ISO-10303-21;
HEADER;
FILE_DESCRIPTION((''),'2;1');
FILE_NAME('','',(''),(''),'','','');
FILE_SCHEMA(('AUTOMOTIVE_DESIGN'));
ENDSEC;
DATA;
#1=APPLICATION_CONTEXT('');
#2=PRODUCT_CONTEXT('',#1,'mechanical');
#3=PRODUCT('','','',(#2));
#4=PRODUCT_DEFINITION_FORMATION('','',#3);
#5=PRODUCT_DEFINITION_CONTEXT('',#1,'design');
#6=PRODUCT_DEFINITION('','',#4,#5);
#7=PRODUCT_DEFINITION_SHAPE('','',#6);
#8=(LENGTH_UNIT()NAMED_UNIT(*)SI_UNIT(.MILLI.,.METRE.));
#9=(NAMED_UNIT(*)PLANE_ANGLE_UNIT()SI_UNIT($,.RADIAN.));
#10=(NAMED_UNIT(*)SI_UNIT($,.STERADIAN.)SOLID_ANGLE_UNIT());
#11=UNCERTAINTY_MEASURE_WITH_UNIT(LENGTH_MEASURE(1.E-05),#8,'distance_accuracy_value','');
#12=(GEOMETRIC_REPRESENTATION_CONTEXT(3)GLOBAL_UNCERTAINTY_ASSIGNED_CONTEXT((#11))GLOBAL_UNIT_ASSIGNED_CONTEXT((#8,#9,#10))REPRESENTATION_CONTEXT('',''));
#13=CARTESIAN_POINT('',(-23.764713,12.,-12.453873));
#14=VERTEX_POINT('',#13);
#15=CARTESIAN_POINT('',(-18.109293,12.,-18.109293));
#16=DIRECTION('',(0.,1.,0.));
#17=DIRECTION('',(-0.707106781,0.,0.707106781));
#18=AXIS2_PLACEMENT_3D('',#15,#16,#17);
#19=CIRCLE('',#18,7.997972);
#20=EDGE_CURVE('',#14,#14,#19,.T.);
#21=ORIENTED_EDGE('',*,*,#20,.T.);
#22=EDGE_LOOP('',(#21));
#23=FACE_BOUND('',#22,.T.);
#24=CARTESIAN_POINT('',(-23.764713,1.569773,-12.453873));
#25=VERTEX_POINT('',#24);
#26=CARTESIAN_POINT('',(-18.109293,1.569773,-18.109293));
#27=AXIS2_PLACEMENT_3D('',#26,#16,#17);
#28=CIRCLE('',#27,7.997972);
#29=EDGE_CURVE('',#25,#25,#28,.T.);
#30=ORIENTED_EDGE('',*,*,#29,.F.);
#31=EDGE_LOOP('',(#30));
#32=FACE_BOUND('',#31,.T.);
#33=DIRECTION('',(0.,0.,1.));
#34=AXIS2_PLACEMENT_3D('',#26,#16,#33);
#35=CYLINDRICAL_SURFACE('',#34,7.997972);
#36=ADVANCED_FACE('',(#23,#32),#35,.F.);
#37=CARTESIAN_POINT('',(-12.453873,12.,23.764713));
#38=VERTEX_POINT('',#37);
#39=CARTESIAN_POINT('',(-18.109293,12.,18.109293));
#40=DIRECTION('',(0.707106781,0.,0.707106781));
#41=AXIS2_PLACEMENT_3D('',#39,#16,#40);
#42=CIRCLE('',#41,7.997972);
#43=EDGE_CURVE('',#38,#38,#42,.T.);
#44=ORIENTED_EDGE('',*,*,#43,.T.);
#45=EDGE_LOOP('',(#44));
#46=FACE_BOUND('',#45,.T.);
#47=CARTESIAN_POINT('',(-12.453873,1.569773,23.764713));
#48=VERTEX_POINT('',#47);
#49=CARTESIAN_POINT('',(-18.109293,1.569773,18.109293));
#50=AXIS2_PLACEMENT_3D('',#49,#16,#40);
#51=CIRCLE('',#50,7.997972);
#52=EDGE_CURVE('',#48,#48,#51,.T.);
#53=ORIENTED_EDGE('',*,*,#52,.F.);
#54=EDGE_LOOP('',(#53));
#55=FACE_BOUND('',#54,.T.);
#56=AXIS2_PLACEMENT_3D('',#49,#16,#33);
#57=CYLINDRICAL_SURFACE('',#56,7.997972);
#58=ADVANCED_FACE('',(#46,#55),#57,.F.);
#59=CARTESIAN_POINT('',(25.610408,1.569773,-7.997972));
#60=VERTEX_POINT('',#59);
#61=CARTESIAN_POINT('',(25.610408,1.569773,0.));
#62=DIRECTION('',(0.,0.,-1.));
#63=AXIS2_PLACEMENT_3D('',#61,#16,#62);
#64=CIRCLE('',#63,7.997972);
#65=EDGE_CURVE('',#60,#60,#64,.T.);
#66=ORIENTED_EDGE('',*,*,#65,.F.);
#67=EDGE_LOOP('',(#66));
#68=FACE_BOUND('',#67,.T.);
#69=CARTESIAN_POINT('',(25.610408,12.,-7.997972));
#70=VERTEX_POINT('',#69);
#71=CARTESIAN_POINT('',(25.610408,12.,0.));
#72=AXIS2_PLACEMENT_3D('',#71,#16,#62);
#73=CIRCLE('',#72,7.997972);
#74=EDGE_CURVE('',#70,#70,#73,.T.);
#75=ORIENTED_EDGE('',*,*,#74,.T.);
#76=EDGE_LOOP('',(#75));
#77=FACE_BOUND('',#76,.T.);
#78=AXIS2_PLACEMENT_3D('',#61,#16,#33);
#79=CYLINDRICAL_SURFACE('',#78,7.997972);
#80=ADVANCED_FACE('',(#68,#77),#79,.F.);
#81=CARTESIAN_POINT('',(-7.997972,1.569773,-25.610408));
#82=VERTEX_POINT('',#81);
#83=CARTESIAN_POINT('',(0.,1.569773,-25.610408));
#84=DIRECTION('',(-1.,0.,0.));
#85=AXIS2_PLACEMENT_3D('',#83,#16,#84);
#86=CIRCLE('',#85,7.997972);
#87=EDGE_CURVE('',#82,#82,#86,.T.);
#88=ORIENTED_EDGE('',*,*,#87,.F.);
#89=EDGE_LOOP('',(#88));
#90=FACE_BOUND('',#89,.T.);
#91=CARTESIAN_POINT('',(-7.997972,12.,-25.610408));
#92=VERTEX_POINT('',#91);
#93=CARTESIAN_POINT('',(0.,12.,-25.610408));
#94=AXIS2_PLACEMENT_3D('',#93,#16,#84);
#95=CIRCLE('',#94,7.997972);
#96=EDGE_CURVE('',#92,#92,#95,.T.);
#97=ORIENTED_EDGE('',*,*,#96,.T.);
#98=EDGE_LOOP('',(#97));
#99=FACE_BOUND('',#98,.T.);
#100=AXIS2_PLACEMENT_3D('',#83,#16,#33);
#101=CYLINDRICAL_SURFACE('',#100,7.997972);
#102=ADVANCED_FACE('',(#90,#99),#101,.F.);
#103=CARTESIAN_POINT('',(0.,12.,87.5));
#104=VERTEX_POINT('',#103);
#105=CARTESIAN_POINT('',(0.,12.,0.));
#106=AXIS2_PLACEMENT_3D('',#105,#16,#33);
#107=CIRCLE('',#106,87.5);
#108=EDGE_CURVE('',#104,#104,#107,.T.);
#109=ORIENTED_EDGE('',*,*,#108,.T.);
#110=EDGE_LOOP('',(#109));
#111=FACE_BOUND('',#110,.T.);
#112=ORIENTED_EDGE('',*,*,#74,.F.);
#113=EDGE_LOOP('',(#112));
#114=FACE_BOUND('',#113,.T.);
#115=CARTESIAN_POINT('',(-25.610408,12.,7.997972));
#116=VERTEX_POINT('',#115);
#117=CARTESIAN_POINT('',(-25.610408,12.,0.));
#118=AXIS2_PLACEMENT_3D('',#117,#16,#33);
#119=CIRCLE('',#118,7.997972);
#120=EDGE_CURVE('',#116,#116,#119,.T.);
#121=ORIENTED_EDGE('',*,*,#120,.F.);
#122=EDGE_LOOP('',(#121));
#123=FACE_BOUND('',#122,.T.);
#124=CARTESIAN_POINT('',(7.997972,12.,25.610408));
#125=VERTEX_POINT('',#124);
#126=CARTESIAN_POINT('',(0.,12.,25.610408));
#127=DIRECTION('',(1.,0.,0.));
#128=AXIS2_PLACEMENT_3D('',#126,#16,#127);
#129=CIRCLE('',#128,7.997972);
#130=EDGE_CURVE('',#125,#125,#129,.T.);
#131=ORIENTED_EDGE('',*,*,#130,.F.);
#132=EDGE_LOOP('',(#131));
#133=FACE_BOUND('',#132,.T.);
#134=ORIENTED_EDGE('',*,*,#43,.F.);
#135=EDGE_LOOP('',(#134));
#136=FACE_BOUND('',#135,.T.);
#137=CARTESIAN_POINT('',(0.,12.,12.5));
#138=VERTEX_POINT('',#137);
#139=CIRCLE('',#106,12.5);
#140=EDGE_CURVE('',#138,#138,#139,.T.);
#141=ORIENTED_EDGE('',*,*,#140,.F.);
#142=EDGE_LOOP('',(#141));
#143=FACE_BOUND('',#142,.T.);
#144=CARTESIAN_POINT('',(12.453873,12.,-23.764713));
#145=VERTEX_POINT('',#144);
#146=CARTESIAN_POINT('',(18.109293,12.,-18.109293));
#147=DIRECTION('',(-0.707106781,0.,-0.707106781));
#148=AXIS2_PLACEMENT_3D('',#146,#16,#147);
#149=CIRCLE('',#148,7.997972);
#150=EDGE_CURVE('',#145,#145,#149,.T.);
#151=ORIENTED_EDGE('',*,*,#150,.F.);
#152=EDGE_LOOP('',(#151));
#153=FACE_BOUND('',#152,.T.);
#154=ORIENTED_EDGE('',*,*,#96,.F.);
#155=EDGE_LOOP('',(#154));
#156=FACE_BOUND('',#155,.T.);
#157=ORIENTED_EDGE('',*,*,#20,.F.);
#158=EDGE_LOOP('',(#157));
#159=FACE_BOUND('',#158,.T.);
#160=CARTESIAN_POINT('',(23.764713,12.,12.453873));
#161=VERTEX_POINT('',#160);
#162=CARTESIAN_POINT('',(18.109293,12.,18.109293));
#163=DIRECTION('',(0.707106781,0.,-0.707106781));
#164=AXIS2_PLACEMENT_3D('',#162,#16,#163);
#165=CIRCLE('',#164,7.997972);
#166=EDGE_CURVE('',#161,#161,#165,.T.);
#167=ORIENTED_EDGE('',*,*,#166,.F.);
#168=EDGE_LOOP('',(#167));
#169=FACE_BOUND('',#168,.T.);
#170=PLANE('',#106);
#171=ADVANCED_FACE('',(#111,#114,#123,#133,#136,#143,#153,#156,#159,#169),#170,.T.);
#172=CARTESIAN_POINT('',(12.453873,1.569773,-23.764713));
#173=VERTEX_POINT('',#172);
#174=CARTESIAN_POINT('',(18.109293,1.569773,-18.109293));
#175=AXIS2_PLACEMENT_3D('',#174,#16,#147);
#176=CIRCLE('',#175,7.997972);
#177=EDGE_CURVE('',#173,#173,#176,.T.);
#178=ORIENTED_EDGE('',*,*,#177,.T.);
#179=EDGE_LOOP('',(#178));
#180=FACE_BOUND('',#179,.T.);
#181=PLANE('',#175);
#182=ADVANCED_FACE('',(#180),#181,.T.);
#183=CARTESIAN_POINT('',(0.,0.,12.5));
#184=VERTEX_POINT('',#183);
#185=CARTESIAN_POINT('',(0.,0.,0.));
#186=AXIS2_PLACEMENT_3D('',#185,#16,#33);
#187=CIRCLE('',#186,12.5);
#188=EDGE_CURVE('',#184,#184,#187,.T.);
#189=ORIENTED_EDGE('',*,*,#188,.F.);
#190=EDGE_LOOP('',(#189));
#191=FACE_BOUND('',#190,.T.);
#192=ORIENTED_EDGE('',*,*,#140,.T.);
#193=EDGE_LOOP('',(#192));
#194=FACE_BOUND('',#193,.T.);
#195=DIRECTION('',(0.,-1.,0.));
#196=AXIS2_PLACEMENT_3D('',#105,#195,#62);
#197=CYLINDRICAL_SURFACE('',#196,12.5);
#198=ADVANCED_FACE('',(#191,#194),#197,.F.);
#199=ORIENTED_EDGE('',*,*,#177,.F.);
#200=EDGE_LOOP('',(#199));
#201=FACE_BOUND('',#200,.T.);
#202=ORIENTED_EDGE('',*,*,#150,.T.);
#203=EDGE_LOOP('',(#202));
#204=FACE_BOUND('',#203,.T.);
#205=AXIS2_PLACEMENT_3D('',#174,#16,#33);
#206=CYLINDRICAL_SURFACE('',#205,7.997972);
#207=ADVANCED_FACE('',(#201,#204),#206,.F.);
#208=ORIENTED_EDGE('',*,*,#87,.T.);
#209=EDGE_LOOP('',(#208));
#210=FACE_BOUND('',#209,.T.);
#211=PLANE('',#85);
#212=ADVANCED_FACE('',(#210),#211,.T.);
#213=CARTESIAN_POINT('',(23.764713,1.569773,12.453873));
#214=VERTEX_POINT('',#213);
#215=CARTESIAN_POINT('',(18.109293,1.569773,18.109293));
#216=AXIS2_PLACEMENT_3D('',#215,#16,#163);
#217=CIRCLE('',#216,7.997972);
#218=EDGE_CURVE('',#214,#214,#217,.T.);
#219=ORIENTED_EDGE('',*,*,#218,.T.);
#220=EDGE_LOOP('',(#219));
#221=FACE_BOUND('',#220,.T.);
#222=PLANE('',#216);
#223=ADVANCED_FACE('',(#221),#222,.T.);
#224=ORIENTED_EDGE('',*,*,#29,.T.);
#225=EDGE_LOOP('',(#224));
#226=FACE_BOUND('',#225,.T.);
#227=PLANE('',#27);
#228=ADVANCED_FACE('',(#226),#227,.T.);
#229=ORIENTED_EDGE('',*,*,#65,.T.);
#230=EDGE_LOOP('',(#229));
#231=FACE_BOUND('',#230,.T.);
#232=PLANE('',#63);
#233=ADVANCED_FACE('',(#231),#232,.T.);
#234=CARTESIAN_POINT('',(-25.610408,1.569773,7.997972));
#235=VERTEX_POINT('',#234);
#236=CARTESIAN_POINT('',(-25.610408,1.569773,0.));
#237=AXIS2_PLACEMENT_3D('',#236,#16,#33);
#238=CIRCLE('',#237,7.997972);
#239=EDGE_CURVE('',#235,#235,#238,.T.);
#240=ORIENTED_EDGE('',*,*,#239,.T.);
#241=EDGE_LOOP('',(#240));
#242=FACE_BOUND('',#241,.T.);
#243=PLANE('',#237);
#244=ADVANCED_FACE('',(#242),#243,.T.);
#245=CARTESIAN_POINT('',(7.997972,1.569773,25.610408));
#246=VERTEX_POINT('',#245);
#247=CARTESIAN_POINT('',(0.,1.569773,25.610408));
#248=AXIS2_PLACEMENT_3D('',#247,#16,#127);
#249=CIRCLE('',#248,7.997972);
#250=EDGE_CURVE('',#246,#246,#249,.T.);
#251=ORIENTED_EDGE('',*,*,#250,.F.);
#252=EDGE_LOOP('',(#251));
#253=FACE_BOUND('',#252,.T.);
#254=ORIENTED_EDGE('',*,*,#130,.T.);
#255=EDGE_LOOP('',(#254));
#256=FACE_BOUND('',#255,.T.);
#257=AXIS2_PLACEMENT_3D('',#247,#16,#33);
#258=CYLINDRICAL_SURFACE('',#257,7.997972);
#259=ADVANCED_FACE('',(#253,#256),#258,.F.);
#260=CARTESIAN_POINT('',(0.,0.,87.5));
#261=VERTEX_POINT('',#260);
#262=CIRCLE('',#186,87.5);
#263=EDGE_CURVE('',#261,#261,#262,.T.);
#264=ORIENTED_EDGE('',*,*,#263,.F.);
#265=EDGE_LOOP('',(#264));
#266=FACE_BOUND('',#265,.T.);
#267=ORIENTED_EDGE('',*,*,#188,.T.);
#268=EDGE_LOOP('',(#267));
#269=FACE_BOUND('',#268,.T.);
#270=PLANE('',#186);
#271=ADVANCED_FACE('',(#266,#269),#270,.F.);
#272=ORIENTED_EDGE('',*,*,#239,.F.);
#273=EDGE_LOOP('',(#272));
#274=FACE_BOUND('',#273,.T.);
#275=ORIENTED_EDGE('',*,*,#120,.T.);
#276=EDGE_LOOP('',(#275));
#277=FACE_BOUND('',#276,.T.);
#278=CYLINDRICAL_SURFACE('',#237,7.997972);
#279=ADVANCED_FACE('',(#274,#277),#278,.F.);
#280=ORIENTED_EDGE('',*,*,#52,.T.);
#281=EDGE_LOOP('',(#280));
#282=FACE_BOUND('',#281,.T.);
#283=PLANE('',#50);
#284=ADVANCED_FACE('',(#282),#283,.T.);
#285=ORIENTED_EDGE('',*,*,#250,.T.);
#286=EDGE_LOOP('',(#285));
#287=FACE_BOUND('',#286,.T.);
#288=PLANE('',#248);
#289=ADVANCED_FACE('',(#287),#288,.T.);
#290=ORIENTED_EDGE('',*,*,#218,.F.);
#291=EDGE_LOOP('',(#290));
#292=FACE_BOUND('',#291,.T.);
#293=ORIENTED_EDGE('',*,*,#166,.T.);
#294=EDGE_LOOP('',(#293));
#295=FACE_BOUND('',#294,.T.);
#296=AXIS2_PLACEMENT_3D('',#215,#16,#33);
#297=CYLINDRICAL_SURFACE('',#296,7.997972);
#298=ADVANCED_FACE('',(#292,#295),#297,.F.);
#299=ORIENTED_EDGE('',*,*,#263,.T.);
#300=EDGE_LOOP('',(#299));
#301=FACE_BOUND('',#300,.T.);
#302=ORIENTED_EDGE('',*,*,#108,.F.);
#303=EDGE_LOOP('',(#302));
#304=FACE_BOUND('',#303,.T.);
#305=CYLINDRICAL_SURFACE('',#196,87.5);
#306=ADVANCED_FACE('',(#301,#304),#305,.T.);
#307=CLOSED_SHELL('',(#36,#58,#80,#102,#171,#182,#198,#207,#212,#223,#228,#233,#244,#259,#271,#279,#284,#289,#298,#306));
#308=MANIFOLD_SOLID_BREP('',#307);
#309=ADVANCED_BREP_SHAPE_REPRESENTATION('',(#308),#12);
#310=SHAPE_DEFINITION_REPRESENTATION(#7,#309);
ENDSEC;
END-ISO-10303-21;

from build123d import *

# Parameters (mm, degrees)
SKETCH1_R           = 87.5
BOSS_EXTRUDE1_DEPTH = 12
SKETCH2_R           = 12.5
CUT_EXTRUDE1_DEPTH  = 125.324173032
SKETCH3_R           = 7.997971968
CUT_EXTRUDE2_DEPTH  = 10.430226508
CIRPATTERN1_COUNT   = 8


with BuildPart() as part:
    # Sketch1 → Boss-Extrude1 (new body)
    with BuildSketch(Plane(origin=(0, 0, 0), x_dir=(1, 0, 0), z_dir=(0, 1, 0))):
        Circle(SKETCH1_R)
    extrude(amount=BOSS_EXTRUDE1_DEPTH)

    # Sketch2 → Cut-Extrude1 (cut, through all)
    with BuildSketch(Plane(origin=(0, 0, 0), x_dir=(1, 0, 0), z_dir=(0, 1, 0))):
        Circle(SKETCH2_R)
    extrude(amount=CUT_EXTRUDE1_DEPTH, mode=Mode.SUBTRACT)

    # Sketch3 → Cut-Extrude2 (cut)
    with BuildSketch(Plane(origin=(0, 12, 0), x_dir=(1, 0, 0), z_dir=(0, 1, 0))):
        with Locations((-25.610408148, 0)):
            Circle(SKETCH3_R)
    cut_extrude2 = extrude(amount=-CUT_EXTRUDE2_DEPTH, mode=Mode.SUBTRACT)

    # CirPattern1: Cut-Extrude2 ×8 about axis
    cirpattern1_axis = Axis((0, 0, 0), (0, 1, 0))
    for i in range(1, CIRPATTERN1_COUNT):
        add(cut_extrude2.rotate(cirpattern1_axis, i * 360 / CIRPATTERN1_COUNT), mode=Mode.SUBTRACT)


solid = part.part
